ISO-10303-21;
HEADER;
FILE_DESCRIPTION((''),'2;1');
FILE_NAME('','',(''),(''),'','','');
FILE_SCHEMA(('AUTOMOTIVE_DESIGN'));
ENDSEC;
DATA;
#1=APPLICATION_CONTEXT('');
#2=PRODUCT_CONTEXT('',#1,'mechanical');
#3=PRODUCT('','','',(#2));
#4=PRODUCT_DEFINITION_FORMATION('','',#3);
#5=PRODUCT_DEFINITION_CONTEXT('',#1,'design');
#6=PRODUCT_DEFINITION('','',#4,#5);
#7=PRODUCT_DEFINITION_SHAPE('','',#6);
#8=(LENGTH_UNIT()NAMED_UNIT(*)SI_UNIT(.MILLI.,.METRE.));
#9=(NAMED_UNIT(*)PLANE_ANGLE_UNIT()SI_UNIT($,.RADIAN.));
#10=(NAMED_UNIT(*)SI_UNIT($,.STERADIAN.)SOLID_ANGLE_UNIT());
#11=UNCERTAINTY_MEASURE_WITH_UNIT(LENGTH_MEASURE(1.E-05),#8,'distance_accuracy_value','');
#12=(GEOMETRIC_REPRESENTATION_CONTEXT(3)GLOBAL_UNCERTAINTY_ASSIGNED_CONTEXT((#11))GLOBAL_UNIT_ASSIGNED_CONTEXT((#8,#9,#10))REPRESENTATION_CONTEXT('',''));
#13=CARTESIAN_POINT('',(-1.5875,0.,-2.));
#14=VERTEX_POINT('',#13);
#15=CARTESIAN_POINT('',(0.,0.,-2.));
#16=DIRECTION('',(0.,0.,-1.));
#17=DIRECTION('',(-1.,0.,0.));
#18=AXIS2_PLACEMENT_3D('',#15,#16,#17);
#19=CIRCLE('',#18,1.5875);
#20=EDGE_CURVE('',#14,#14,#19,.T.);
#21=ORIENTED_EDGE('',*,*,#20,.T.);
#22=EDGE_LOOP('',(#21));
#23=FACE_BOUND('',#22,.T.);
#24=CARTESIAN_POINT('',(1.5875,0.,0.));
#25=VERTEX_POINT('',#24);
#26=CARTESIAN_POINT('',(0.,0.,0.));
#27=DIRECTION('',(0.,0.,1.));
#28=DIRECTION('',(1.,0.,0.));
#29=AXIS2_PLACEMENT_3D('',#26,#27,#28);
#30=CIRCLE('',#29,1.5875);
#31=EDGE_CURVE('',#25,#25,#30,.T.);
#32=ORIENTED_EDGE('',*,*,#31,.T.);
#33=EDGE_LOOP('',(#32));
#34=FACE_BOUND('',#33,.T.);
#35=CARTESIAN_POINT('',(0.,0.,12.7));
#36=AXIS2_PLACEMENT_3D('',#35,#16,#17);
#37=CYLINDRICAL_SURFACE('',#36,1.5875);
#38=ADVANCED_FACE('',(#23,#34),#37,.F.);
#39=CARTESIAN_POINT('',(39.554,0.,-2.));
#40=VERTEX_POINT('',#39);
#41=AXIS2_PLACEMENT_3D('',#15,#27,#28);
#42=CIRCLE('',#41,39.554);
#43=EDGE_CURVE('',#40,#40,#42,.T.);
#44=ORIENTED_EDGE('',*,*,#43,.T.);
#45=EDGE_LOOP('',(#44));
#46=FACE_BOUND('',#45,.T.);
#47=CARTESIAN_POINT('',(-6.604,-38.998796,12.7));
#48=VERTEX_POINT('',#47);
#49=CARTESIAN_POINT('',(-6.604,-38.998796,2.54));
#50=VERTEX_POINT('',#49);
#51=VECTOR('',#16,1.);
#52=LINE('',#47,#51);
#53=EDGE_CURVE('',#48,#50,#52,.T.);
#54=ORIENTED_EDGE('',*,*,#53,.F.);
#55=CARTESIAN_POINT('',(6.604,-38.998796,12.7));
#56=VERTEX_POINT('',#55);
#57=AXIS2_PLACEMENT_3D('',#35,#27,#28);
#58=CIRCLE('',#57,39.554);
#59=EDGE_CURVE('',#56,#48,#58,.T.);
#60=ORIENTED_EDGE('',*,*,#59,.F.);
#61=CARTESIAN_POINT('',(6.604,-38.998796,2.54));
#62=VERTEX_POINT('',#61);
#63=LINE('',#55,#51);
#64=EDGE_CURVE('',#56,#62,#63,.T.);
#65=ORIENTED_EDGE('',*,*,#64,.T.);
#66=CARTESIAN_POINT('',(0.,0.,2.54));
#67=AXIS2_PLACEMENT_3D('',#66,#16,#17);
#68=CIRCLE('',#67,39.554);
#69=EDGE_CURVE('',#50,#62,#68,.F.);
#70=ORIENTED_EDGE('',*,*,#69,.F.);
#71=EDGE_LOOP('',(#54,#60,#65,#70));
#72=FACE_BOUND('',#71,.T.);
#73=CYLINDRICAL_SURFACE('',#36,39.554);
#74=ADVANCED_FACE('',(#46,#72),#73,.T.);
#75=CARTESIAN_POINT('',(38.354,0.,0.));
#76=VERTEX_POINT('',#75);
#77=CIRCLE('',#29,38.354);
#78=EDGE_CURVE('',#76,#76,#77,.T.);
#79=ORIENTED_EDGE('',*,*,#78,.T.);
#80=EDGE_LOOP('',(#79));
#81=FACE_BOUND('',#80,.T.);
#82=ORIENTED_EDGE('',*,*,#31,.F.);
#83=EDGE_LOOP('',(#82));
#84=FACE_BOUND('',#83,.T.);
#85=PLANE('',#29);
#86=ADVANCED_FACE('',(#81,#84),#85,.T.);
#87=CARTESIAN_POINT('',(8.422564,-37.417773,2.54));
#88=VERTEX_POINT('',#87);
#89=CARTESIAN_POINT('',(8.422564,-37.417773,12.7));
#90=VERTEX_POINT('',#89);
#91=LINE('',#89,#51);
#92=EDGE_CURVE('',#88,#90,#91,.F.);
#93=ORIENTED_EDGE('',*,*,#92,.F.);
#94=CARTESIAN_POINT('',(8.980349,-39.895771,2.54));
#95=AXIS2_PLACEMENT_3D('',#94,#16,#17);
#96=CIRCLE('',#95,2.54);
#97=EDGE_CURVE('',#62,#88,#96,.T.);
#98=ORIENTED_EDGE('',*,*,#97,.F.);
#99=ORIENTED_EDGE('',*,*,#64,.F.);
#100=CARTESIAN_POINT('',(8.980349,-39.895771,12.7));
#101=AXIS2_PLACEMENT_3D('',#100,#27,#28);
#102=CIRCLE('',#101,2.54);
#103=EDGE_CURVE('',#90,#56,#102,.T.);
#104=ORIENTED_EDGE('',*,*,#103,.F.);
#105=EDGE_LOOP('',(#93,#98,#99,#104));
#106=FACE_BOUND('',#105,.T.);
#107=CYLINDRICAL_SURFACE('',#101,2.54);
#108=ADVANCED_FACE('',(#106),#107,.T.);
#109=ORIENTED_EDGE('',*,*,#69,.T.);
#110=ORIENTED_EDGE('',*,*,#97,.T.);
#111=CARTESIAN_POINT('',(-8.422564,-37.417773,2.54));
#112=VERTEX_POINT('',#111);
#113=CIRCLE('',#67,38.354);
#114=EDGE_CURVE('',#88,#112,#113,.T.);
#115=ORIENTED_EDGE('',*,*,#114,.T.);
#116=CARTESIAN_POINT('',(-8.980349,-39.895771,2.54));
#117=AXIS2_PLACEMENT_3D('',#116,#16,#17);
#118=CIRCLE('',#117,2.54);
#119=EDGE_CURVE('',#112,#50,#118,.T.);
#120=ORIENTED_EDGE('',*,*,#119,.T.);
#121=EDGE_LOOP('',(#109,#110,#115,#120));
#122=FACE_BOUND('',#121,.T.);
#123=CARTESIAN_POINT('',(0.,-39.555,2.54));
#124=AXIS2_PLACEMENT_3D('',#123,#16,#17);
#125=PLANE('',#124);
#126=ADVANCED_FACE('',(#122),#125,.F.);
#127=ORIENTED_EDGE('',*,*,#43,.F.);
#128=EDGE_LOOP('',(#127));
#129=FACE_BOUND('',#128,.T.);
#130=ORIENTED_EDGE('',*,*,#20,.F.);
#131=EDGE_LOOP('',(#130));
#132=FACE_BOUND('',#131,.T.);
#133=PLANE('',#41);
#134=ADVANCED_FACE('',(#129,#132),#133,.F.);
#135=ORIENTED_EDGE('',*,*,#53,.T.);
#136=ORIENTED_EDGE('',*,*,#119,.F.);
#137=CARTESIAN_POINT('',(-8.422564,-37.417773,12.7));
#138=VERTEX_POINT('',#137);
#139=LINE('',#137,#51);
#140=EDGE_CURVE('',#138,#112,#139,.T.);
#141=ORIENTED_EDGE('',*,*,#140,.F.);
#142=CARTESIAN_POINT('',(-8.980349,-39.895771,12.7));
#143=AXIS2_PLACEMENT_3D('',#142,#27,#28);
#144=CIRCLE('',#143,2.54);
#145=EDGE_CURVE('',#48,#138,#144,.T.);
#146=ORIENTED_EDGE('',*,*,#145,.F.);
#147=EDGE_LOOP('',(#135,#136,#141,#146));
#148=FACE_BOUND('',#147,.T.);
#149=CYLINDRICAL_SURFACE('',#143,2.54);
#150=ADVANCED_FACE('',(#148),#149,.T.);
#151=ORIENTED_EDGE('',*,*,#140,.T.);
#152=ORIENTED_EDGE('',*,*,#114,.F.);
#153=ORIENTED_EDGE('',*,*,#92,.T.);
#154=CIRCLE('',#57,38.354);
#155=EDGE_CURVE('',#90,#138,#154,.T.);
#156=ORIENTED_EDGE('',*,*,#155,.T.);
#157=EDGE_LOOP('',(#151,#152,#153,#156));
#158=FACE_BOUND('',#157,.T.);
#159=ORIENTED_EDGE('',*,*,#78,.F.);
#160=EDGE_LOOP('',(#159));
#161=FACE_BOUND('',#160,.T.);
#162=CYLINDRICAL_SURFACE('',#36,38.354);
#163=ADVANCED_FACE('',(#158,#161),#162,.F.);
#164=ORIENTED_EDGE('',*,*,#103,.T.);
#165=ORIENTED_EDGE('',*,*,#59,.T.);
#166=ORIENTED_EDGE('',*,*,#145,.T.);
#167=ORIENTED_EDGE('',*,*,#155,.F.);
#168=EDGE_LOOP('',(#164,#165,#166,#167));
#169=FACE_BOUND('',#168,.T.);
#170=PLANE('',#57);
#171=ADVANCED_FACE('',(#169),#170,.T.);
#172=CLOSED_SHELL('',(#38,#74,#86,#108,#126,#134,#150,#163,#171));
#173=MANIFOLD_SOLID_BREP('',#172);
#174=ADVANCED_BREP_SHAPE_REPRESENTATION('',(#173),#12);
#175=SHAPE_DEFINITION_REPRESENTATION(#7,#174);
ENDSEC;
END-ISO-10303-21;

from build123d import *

# Parameters (mm, degrees)
SKETCH2_R           = 39.554
SKETCH2_R_2         = 38.354
BOSS_EXTRUDE1_DEPTH = 12.7
BOSS_EXTRUDE2_START = -2
SKETCH2_2_R         = 39.554
BOSS_EXTRUDE2_DEPTH = 2
SKETCH4_R           = 1.5875
CUT_EXTRUDE1_DEPTH  = 58.837080078
CUT_EXTRUDE3_REACH  = 59.361
SKETCH5_W           = 13.208
SKETCH5_H           = 10.16
FILLET1_R           = 2.54


with BuildPart() as part:
    # Sketch2 → Boss-Extrude1 (new body)
    with BuildSketch(Plane.XY):
        Circle(SKETCH2_R)
        Circle(SKETCH2_R_2, mode=Mode.SUBTRACT)
    extrude(amount=BOSS_EXTRUDE1_DEPTH)

    # Sketch2<2> → Boss-Extrude2 (add)
    with BuildSketch(Plane.XY.offset(BOSS_EXTRUDE2_START)):
        Circle(SKETCH2_2_R)
    extrude(amount=BOSS_EXTRUDE2_DEPTH)

    # Sketch4 → Cut-Extrude1 (cut, through all)
    with BuildSketch(Plane(origin=(0, 0, -2), x_dir=(-1, 0, 0), z_dir=(0, 0, -1))):
        Circle(SKETCH4_R)
    extrude(amount=-CUT_EXTRUDE1_DEPTH, mode=Mode.SUBTRACT)

    # Sketch5 → Cut-Extrude3 (cut, up to next)
    with BuildSketch(Plane(origin=(0, 0, 0), x_dir=(1, 0, 0), z_dir=(0, 1, 0)), mode=Mode.PRIVATE) as cut_extrude3_sk1:
        with Locations((0, -7.62)):
            Rectangle(SKETCH5_W, SKETCH5_H)
    cut_extrude3_tool1 = extrude(cut_extrude3_sk1.sketch, amount=-CUT_EXTRUDE3_REACH, mode=Mode.PRIVATE) & part.part
    add(cut_extrude3_tool1.solids().sort_by_distance((0, 0, 7.62))[0], mode=Mode.SUBTRACT)

    # Fillet1
    # the kernel refuses this fillet: 2.54 mm, written as the material it takes off along each edge
    with BuildSketch(Plane(origin=(-6.604, -37.781165943, 17.336288805), x_dir=(0, -1, 0), z_dir=(0, 0, -1))) as fillet1_piece_1:
        with BuildLine():
            CenterArc((2.114605309, 2.376349225), FILLET1_R, 192.685578689, 56.634940698)
            Line((-0.363392905, 1.818563559), (-0.41295287, 1.807407846))
            ThreePointArc((-0.41295287, 1.807407846), (-0.220518494, 0.901524198), (-0.050041279, -0.00874702))
            Line((-0.050041279, -0.00874702), (0, -0.0508))
            ThreePointArc((0, -0.0508), (0.608815096, -0.0508), (1.19969069, -0.047526985))
            Line((1.19969069, -0.047526985), (1.217630192, 0))
        make_face()
    extrude(amount=14.796288805, mode=Mode.SUBTRACT)
    with BuildSketch(Plane(origin=(6.604, -37.781165943, 17.336288805), x_dir=(0, -1, 0), z_dir=(0, 0, -1))) as fillet1_piece_2:
        with BuildLine():
            CenterArc((2.114605309, -2.376349225), FILLET1_R, 110.679480614, 56.634940698)
            Line((-0.363392905, -1.818563559), (-0.41295287, -1.807407846))
            ThreePointArc((-0.41295287, -1.807407846), (-0.220518494, -0.901524198), (-0.050041279, 0.00874702))
            Line((-0.050041279, 0.00874702), (0, 0.0508))
            ThreePointArc((0, 0.0508), (0.608815096, 0.0508), (1.19969069, 0.047526985))
            Line((1.19969069, 0.047526985), (1.217630192, 0))
        make_face()
    extrude(amount=14.796288805, mode=Mode.SUBTRACT)


solid = part.part
